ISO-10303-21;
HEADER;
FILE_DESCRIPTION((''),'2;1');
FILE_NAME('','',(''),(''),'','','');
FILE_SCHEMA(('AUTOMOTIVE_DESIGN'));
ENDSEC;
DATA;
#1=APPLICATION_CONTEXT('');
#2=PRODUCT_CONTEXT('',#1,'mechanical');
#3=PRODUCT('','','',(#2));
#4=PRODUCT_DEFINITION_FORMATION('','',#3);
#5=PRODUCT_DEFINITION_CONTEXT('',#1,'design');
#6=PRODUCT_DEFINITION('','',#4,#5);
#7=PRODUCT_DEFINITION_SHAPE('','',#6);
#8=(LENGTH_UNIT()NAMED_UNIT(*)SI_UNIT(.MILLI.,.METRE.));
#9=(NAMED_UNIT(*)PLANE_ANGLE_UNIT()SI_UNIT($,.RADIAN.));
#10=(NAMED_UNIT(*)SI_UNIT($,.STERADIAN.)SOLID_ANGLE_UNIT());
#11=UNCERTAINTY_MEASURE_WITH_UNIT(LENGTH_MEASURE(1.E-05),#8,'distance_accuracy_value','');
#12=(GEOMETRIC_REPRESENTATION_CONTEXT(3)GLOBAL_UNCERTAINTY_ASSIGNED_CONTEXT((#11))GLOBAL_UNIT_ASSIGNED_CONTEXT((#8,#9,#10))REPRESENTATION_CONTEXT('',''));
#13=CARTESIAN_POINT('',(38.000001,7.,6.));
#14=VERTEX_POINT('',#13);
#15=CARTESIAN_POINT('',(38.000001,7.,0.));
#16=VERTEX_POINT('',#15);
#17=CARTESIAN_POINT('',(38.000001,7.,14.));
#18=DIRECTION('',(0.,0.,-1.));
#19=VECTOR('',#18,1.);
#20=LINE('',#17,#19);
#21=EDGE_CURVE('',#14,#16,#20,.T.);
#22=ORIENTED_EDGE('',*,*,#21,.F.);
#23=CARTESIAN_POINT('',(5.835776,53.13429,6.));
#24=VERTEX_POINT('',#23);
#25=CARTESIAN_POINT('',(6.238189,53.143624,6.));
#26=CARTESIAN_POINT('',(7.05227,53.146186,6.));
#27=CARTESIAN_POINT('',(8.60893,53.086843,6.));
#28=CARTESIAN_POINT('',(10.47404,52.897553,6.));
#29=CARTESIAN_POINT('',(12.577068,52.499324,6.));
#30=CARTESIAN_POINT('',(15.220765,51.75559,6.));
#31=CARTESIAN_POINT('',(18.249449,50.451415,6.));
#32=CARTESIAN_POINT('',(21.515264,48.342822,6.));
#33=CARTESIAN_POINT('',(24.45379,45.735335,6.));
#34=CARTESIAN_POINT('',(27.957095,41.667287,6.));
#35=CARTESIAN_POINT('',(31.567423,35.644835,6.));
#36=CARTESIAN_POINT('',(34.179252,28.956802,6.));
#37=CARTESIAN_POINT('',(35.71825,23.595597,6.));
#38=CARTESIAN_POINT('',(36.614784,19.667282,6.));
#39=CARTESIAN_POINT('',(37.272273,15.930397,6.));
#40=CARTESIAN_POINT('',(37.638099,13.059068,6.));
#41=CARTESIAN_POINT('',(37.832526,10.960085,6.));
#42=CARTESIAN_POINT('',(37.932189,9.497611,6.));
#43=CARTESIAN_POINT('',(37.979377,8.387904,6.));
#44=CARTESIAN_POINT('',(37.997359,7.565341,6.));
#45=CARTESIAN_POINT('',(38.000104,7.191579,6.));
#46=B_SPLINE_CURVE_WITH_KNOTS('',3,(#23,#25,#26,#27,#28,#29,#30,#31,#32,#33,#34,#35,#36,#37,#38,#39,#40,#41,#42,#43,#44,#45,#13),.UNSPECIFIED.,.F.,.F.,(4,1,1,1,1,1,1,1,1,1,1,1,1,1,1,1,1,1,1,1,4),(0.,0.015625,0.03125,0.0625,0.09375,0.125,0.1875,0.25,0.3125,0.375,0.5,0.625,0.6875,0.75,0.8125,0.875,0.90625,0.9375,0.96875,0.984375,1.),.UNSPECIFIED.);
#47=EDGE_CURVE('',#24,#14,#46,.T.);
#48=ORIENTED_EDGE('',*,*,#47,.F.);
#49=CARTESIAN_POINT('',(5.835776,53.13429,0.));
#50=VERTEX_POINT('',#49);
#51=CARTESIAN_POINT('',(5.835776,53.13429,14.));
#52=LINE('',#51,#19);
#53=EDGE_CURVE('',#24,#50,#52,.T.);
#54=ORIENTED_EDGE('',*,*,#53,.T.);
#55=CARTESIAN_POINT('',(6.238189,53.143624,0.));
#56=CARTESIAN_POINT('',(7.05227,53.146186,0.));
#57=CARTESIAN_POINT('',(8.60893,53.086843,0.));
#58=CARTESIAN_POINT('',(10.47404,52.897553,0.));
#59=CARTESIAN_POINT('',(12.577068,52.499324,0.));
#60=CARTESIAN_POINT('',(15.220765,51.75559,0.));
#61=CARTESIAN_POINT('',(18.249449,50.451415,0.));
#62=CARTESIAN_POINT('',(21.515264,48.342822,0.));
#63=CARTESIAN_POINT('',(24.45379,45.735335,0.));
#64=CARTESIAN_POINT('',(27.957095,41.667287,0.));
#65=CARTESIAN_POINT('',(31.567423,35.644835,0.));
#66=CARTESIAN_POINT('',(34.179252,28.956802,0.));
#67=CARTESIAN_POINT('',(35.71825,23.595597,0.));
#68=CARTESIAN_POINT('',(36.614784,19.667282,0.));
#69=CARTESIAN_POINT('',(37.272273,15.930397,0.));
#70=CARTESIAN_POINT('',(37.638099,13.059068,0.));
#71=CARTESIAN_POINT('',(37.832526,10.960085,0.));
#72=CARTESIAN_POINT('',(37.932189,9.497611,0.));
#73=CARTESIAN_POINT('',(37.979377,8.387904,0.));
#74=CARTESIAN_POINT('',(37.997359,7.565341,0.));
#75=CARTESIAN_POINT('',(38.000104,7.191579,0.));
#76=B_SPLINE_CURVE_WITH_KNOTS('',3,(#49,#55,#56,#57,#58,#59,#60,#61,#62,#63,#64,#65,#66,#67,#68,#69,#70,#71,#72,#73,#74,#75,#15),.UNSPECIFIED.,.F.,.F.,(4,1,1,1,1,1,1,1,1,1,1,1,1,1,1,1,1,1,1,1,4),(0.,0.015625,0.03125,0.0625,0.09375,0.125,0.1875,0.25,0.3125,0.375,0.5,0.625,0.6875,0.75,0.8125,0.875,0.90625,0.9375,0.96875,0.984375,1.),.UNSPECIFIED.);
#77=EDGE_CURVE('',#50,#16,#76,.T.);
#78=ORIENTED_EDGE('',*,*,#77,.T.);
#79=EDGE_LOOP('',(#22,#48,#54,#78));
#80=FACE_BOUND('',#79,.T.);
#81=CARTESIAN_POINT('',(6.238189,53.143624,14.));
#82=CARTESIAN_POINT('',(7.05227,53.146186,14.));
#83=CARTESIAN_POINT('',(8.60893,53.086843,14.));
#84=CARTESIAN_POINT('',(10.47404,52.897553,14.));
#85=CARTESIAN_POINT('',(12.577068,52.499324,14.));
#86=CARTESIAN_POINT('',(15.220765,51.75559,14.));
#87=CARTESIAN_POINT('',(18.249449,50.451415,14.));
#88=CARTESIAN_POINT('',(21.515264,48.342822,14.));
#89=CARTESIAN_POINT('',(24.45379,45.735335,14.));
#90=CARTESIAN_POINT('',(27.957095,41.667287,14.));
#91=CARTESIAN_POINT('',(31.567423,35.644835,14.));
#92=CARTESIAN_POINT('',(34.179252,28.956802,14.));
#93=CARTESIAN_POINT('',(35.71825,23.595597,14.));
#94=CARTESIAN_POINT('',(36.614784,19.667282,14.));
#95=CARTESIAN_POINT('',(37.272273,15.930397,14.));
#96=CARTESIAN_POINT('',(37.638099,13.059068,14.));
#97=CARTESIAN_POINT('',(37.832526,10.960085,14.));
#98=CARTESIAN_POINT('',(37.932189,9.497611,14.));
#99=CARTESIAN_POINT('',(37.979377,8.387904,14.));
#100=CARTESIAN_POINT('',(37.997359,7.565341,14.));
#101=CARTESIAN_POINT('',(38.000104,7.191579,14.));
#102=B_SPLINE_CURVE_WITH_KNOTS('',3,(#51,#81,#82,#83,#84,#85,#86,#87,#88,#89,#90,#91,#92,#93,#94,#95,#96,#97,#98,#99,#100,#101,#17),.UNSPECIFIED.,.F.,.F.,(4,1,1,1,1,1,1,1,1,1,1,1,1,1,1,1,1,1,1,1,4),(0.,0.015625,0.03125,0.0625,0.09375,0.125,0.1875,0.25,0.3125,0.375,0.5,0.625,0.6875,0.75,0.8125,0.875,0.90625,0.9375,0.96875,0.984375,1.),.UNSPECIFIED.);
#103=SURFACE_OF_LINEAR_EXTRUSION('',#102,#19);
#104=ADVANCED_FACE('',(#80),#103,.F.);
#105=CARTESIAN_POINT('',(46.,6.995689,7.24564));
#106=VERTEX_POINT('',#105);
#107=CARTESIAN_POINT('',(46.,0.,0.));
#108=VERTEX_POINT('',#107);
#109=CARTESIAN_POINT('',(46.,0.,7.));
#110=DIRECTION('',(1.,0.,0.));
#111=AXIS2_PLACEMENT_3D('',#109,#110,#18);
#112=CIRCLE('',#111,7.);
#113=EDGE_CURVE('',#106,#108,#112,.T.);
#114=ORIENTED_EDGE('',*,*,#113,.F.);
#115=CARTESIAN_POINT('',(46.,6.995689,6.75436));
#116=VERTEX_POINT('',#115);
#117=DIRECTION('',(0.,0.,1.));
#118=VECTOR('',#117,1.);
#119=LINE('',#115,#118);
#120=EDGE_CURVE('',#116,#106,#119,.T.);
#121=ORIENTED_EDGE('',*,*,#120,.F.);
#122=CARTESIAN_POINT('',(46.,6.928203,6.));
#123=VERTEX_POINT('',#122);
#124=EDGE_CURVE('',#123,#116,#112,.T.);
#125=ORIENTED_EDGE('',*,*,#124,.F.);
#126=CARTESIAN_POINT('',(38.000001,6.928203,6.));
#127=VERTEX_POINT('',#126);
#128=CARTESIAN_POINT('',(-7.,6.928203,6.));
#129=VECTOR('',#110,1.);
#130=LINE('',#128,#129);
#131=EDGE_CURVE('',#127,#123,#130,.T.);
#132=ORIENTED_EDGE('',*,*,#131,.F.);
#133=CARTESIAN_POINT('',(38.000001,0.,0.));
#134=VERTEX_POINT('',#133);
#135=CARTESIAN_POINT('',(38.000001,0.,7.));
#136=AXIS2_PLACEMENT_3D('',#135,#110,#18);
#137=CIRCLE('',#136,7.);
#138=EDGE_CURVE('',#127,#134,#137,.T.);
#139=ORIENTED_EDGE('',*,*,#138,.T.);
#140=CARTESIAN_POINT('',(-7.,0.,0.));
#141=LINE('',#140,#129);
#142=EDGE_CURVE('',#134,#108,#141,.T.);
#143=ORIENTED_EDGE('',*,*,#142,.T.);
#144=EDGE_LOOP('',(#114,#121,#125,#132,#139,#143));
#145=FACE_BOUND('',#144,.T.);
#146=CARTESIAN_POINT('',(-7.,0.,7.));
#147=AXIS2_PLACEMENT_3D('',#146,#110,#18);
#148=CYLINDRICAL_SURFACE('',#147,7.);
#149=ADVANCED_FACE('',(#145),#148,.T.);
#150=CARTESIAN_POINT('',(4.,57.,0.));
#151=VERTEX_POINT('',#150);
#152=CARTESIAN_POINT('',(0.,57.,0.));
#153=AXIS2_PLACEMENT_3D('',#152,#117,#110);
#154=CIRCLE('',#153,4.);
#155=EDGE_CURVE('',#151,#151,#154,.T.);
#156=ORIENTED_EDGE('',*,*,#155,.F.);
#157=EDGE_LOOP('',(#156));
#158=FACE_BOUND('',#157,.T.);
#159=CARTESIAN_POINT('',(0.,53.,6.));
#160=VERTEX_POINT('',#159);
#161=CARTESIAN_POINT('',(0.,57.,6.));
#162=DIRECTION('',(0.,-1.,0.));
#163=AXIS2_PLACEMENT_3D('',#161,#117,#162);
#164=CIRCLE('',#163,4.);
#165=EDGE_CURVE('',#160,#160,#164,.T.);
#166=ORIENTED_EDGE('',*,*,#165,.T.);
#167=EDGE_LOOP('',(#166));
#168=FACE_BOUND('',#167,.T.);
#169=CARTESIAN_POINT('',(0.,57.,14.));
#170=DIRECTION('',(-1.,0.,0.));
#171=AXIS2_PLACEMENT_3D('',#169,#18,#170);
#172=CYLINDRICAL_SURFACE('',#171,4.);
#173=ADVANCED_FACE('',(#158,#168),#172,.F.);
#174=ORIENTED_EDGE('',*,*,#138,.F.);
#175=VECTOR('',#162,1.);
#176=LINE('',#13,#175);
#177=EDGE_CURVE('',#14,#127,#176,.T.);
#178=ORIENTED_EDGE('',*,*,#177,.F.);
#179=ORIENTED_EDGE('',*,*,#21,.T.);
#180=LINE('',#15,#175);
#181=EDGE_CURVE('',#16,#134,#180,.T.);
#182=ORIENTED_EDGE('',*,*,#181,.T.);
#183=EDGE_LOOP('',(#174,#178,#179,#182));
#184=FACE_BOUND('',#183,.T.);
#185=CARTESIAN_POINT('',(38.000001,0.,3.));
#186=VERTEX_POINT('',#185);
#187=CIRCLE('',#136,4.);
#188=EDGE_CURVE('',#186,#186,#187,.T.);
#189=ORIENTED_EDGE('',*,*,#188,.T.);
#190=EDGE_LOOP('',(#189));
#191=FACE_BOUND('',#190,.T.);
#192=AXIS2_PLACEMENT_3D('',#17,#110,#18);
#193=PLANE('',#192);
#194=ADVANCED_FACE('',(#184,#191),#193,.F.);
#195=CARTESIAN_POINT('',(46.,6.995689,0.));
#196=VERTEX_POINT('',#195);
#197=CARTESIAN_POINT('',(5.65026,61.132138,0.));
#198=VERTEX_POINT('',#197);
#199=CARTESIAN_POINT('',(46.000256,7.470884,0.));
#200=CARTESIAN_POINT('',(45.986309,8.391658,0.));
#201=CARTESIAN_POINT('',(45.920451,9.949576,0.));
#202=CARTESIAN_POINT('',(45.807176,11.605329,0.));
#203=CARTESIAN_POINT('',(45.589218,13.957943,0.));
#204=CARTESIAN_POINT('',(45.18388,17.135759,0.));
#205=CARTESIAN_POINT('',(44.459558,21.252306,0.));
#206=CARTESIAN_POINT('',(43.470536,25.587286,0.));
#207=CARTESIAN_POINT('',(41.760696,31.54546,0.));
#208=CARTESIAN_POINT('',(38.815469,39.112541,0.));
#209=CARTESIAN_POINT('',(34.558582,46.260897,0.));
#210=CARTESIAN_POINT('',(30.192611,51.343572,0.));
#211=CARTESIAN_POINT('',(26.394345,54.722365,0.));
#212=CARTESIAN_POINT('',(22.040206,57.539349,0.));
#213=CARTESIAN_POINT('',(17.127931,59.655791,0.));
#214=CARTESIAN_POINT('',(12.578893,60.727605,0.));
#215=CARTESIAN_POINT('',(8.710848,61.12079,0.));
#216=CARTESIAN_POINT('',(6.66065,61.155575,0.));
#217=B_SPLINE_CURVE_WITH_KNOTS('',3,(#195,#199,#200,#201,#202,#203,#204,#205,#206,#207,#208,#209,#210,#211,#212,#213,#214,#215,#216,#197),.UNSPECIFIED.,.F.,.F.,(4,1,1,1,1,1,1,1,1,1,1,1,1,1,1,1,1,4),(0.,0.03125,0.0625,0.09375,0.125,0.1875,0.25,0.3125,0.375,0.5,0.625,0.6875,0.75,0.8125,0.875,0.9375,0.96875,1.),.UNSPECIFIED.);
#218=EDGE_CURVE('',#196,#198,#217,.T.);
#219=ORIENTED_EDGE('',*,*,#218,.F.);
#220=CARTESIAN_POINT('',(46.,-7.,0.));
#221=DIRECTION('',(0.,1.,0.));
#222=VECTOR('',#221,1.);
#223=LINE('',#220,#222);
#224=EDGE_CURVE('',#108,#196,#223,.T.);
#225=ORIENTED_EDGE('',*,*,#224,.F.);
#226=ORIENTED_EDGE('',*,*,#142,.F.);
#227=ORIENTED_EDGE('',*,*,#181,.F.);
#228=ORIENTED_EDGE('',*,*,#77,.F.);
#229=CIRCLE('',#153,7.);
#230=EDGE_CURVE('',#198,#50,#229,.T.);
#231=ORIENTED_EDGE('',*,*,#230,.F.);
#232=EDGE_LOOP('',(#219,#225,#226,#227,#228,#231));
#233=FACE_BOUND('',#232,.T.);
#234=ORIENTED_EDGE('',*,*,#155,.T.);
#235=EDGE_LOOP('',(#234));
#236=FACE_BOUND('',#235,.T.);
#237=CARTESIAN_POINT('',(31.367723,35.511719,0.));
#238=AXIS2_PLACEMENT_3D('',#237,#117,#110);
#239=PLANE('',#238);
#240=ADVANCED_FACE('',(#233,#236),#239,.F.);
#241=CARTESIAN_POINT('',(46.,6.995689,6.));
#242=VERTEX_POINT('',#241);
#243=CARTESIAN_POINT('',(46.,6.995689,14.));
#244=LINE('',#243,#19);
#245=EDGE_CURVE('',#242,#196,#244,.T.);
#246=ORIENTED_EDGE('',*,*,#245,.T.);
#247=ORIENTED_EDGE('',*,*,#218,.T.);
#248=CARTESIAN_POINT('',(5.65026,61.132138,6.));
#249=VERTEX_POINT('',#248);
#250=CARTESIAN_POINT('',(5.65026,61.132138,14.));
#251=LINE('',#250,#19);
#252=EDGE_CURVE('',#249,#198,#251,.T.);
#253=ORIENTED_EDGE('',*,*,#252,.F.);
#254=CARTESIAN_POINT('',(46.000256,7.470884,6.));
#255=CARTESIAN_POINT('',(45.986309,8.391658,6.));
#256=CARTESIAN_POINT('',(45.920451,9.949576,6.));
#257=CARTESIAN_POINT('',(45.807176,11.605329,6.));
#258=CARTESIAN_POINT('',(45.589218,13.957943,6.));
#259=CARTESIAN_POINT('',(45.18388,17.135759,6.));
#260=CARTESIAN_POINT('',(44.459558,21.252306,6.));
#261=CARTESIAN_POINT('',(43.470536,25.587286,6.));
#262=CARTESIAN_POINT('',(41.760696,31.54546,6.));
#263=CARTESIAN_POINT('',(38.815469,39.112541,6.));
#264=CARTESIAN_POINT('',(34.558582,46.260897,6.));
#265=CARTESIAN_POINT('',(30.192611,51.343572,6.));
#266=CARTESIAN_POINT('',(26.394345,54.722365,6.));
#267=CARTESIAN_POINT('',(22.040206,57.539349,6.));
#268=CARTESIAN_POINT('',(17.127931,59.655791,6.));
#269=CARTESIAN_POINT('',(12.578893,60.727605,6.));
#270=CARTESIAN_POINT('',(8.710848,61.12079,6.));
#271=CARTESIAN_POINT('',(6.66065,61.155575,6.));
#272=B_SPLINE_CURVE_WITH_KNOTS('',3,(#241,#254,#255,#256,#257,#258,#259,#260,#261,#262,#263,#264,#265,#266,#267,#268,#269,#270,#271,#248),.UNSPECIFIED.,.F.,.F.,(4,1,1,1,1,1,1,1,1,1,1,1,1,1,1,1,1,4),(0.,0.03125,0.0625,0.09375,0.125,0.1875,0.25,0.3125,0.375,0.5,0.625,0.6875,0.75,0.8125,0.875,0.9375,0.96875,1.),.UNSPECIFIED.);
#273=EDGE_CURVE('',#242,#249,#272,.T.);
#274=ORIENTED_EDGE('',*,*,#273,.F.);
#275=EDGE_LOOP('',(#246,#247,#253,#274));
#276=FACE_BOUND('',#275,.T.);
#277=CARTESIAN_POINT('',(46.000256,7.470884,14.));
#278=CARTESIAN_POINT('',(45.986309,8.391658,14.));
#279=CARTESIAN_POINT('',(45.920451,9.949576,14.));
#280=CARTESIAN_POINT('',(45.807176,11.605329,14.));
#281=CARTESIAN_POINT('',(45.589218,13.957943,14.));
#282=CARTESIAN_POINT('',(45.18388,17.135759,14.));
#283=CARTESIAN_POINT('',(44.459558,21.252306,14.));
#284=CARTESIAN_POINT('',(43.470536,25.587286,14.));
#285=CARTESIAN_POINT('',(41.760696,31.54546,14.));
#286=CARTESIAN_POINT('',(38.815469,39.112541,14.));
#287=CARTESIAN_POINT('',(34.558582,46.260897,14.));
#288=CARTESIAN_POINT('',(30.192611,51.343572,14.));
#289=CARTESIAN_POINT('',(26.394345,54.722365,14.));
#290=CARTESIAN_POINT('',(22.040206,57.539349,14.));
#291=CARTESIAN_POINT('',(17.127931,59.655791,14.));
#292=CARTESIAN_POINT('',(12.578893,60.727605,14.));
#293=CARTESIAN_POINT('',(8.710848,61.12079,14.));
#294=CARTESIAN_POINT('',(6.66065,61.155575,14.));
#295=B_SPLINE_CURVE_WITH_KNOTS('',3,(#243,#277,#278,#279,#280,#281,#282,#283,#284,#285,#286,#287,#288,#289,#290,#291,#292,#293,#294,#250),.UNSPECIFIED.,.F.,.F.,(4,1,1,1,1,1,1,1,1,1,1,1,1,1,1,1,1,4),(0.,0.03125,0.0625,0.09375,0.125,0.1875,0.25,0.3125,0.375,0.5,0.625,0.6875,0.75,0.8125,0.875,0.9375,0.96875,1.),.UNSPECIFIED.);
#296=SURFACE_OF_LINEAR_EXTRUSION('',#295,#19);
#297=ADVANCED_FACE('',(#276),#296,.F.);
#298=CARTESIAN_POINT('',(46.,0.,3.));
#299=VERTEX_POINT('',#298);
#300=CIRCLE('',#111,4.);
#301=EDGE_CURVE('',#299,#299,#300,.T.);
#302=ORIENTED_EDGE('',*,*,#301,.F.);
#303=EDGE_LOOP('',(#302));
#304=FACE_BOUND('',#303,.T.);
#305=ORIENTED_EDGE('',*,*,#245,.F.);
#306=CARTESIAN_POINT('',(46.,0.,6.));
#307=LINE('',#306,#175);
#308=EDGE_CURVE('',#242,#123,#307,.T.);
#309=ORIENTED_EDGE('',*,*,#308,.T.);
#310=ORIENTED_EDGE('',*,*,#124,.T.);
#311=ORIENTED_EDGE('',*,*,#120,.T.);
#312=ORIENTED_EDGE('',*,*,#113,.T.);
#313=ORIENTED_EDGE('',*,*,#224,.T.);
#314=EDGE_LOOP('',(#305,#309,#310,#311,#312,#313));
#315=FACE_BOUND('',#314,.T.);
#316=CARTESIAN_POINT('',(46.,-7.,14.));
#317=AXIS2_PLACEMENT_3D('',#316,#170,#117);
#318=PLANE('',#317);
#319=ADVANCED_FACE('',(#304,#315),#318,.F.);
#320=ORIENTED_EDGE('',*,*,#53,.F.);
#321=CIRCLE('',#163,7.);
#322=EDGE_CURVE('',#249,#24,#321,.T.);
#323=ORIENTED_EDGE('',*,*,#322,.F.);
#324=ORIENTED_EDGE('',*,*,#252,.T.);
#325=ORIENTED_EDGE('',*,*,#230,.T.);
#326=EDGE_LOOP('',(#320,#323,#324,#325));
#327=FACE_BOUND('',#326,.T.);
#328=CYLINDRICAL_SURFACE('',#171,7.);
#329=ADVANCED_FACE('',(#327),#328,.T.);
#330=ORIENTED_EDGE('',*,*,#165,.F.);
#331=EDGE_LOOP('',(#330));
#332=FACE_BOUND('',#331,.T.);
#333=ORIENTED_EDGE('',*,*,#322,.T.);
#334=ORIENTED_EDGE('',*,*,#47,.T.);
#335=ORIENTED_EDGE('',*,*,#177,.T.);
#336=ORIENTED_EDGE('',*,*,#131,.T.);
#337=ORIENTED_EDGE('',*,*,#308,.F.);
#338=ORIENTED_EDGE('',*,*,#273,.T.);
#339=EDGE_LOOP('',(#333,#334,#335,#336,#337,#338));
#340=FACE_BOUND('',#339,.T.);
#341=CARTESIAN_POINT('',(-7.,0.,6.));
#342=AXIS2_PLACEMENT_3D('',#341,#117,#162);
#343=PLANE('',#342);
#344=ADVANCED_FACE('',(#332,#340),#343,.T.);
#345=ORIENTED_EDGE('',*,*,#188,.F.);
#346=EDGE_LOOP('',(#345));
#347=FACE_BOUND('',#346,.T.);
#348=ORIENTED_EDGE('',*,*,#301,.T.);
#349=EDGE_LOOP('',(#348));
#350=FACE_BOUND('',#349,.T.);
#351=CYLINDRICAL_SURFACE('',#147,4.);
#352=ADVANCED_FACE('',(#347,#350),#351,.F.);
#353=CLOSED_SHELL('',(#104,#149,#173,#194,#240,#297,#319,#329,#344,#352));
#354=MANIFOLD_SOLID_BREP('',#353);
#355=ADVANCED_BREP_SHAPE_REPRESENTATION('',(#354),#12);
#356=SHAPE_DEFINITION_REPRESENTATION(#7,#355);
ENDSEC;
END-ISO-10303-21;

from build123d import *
from OCP.BRepAlgoAPI import BRepAlgoAPI_Cut
from OCP.TopTools import TopTools_ListOfShape

# Parameters (mm, degrees)
ESBO_O1_R                = 4
RESSALTO_EXTRUS_O1_DEPTH = 14
ESBO_O2_R                = 4
CORTE_EXTRUS_O1_DEPTH    = 85.267431587


with BuildPart() as part:
    # Esboço1 → Ressalto-extrusão1 (new body)
    with BuildSketch(Plane.XY):
        with BuildLine():
            Line((46, -7), (46, 6.995688759))
            add(Edge.make_bspline(
                [(5.650259544, 61.132138319), (6.660650147, 61.155575151), (8.710848107, 61.120789853), (12.578892548, 60.727605083), (17.127930578, 59.655790613), (22.040205616, 57.539349047), (26.394344624, 54.722364625), (30.19261077, 51.343572081), (34.558581899, 46.260896731), (38.815468688, 39.112541001), (41.760696394, 31.545459809), (43.470535674, 25.587286464), (44.459557745, 21.252306014), (45.183880004, 17.135758602), (45.589217997, 13.957943213), (45.8071763, 11.605329402), (45.920450747, 9.949575993), (45.986308659, 8.391657602), (46.000256085, 7.470883976), (46, 6.995688759)],
                knots=[0, 0, 0, 0, 0.03125, 0.0625, 0.125, 0.1875, 0.25, 0.3125, 0.375, 0.5, 0.625, 0.6875, 0.75, 0.8125, 0.875, 0.90625, 0.9375, 0.96875, 1, 1, 1, 1], degree=3))
            ThreePointArc((5.650259544, 61.132138319), (-6.998117599, 56.837672963), (5.835776158, 53.134289634))
            add(Edge.make_bspline(
                [(5.835776158, 53.134289634), (6.238188643, 53.143623919), (7.052270041, 53.146185942), (8.608930463, 53.086843267), (10.474039614, 52.897553491), (12.577068171, 52.49932445), (15.220765339, 51.755589596), (18.249448664, 50.451415), (21.515264324, 48.342822315), (24.453790354, 45.735335437), (27.957095233, 41.667286815), (31.567422767, 35.644835437), (34.179252288, 28.956801958), (35.718249768, 23.595597215), (36.614783762, 19.667281612), (37.272272941, 15.930397286), (37.638098577, 13.059067768), (37.83252613, 10.960084825), (37.932188748, 9.497611194), (37.979377076, 8.387903873), (37.997359238, 7.565341164), (38.000104404, 7.191578727), (38.000001162, 7)],
                knots=[0, 0, 0, 0, 0.015625, 0.03125, 0.0625, 0.09375, 0.125, 0.1875, 0.25, 0.3125, 0.375, 0.5, 0.625, 0.6875, 0.75, 0.8125, 0.875, 0.90625, 0.9375, 0.96875, 0.984375, 1, 1, 1, 1], degree=3))
            Line((38.000001162, 7), (38.000001162, -7))
            Line((38.000001162, -7), (46, -7))
        make_face()
        with Locations((0, 57)):
            Circle(ESBO_O1_R, mode=Mode.SUBTRACT)
    extrude(amount=RESSALTO_EXTRUS_O1_DEPTH)


with BuildPart() as corte_extrus_o1_tool:
    # Esboço2 → Corte-extrusão1 (new, through all)
    with BuildSketch(Plane(origin=(46, 0, 0), x_dir=(0, 0, -1), z_dir=(1, 0, 0))):
        with BuildLine():
            ThreePointArc((-7, -7), (-11.949747468, -4.949747468), (-14, 0))
            Line((-14, 0), (-14, -7))
            Line((-14, -7), (-7, -7))
        make_face()
        with BuildLine():
            Line((-7.245639543, 6.995688759), (-14, 6.995688759))
            Line((-14, 6.995688759), (-14, 0))
            ThreePointArc((-14, 0), (-12.035845351, 4.862125214), (-7.245639543, 6.995688759))
        make_face()
        with Locations((-7, 0)):
            Circle(ESBO_O2_R)
        with BuildLine():
            Line((0, -7), (0, 0))
            ThreePointArc((0, 0), (-2.050252532, -4.949747468), (-7, -7))
            Line((-7, -7), (0, -7))
        make_face()
        with BuildLine():
            Line((-6, 6.92820323), (-6, 6.995688759))
            Line((-6, 6.995688759), (-6.754360457, 6.995688759))
            ThreePointArc((-6.754360457, 6.995688759), (-6.37626685, 6.972155833), (-6, 6.92820323))
        make_face()
        with BuildLine():
            Line((-6, 6.995688759), (-6, 64))
            Line((-6, 64), (-14, 64))
            Line((-14, 64), (-14, 6.995688759))
            Line((-14, 6.995688759), (-7.245639543, 6.995688759))
            ThreePointArc((-7.245639543, 6.995688759), (-7, 7), (-6.754360457, 6.995688759))
            Line((-6.754360457, 6.995688759), (-6, 6.995688759))
        make_face()
    extrude(amount=-CORTE_EXTRUS_O1_DEPTH)


with BuildPart() as part_1:
    add(part.part)

    # Corte-extrusão1: cut by corte_extrus_o1_tool, with a tolerance
    corte_extrus_o1_stock = TopTools_ListOfShape()
    corte_extrus_o1_stock.Append(part_1.part.wrapped)
    corte_extrus_o1_tools = TopTools_ListOfShape()
    corte_extrus_o1_tools.Append(corte_extrus_o1_tool.part.wrapped)
    corte_extrus_o1_cut = BRepAlgoAPI_Cut()
    corte_extrus_o1_cut.SetArguments(corte_extrus_o1_stock)
    corte_extrus_o1_cut.SetTools(corte_extrus_o1_tools)
    corte_extrus_o1_cut.SetFuzzyValue(0.00001)
    corte_extrus_o1_cut.Build()
    add(Compound.cast(corte_extrus_o1_cut.Shape()).solids(), mode=Mode.REPLACE)


with BuildPart() as corte_extrus_o1_kept_piece:
    # of the separate pieces the step leaves, the one the design keeps (corte_extrus_o1_pieces_kept)
    add(part_1.part.solids().sort_by_distance((46, 0, 0))[0])


solid = corte_extrus_o1_kept_piece.part
